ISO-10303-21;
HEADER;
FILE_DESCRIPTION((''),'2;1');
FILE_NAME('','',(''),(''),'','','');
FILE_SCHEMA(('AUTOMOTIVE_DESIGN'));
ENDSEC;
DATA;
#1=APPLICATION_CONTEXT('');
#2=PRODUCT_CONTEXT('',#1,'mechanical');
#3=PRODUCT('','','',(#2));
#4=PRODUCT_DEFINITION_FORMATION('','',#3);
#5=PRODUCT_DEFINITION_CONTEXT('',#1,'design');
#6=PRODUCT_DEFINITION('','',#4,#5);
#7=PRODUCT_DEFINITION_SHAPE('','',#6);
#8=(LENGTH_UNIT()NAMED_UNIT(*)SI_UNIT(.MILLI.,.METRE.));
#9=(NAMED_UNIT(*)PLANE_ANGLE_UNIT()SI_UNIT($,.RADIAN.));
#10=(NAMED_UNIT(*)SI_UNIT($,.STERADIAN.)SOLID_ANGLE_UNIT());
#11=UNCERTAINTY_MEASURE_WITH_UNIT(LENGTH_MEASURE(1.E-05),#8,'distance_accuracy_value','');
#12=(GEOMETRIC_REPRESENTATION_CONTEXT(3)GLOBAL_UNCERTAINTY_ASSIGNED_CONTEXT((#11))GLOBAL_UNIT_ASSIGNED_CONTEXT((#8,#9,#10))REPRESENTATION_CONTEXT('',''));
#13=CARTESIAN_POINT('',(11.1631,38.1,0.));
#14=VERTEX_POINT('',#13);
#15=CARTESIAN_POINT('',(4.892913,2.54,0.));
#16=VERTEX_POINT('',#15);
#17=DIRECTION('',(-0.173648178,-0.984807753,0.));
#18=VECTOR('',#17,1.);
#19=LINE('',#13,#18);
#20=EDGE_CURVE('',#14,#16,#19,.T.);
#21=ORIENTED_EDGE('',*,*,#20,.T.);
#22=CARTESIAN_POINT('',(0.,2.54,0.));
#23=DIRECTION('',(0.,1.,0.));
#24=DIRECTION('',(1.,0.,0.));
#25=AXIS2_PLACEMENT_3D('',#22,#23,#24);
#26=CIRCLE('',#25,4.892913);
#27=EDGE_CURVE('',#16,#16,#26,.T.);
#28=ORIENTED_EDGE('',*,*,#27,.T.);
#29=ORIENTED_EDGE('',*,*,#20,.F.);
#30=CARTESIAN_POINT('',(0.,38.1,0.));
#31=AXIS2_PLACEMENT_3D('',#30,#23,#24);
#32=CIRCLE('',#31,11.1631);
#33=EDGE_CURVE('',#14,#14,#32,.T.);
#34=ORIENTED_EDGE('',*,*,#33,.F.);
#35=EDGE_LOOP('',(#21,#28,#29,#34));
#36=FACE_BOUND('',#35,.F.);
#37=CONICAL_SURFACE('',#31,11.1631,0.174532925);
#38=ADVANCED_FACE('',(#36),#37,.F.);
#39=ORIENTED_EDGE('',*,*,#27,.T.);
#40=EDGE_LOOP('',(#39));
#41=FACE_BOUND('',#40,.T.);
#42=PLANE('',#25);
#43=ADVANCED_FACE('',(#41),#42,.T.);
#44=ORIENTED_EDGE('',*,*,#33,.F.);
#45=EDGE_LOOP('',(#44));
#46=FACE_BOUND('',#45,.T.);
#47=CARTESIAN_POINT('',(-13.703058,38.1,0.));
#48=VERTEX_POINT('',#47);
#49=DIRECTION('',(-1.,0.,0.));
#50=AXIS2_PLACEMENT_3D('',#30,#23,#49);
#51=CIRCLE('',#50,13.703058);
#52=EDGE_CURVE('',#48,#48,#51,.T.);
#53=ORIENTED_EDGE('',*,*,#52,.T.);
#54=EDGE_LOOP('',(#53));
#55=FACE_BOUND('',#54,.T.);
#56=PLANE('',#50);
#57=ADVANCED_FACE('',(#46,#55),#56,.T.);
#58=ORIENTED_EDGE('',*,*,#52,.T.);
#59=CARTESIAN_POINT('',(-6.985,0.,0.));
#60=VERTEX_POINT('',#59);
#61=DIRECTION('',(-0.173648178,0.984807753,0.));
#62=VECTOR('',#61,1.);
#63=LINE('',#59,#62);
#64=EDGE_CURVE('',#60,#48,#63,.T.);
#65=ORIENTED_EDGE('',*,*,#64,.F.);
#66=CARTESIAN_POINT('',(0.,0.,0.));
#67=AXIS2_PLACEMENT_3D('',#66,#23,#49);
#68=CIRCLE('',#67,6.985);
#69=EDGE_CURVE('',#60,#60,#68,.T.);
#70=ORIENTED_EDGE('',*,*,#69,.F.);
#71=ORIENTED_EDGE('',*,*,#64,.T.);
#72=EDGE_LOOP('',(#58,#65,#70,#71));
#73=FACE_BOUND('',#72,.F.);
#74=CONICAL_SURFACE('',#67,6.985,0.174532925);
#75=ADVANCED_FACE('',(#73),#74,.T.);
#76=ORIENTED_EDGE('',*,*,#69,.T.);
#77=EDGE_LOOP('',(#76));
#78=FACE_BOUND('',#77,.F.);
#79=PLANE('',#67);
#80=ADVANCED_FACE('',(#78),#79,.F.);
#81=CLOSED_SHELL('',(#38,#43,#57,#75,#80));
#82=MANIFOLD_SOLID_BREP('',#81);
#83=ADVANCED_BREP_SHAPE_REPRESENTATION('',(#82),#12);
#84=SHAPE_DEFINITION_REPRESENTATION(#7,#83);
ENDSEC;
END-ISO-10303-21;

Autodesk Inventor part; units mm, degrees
ref_plane "YZ Plane" through (0, 0, 0) normal (1, 0, 0) x (0, 1, 0)
ref_plane "XZ Plane" through (0, 0, 0) normal (0, 1, 0) x (-1, 0, 0)
ref_plane "XY Plane" through (0, 0, 0) normal (0, 0, 1) x (1, 0, 0)
sketch "Sketch1" plane through (0, 0, 0) normal (0, 1, 0) x (-1, 0, 0)
  circle A0 centre (0, 0) radius 6.985
  dimension "d0" = 13.97
extrude "Extrusion1" add sketch "Sketch1" along normal blind 38.1 draft 10
sketch "Sketch2" plane through (0, 38.1, 0) normal (0, 1, 0) x (1, 0, 0)
  circle A0 centre (0, 0) radius 11.1631
  circle A1 centre (0, 0) radius 13.7031 projected
  dimension "d3" = 2.54
extrude "Extrusion2" cut sketch "Sketch2" against normal blind 35.56 draft -10 contours A0
properties part number "Cup- red"
